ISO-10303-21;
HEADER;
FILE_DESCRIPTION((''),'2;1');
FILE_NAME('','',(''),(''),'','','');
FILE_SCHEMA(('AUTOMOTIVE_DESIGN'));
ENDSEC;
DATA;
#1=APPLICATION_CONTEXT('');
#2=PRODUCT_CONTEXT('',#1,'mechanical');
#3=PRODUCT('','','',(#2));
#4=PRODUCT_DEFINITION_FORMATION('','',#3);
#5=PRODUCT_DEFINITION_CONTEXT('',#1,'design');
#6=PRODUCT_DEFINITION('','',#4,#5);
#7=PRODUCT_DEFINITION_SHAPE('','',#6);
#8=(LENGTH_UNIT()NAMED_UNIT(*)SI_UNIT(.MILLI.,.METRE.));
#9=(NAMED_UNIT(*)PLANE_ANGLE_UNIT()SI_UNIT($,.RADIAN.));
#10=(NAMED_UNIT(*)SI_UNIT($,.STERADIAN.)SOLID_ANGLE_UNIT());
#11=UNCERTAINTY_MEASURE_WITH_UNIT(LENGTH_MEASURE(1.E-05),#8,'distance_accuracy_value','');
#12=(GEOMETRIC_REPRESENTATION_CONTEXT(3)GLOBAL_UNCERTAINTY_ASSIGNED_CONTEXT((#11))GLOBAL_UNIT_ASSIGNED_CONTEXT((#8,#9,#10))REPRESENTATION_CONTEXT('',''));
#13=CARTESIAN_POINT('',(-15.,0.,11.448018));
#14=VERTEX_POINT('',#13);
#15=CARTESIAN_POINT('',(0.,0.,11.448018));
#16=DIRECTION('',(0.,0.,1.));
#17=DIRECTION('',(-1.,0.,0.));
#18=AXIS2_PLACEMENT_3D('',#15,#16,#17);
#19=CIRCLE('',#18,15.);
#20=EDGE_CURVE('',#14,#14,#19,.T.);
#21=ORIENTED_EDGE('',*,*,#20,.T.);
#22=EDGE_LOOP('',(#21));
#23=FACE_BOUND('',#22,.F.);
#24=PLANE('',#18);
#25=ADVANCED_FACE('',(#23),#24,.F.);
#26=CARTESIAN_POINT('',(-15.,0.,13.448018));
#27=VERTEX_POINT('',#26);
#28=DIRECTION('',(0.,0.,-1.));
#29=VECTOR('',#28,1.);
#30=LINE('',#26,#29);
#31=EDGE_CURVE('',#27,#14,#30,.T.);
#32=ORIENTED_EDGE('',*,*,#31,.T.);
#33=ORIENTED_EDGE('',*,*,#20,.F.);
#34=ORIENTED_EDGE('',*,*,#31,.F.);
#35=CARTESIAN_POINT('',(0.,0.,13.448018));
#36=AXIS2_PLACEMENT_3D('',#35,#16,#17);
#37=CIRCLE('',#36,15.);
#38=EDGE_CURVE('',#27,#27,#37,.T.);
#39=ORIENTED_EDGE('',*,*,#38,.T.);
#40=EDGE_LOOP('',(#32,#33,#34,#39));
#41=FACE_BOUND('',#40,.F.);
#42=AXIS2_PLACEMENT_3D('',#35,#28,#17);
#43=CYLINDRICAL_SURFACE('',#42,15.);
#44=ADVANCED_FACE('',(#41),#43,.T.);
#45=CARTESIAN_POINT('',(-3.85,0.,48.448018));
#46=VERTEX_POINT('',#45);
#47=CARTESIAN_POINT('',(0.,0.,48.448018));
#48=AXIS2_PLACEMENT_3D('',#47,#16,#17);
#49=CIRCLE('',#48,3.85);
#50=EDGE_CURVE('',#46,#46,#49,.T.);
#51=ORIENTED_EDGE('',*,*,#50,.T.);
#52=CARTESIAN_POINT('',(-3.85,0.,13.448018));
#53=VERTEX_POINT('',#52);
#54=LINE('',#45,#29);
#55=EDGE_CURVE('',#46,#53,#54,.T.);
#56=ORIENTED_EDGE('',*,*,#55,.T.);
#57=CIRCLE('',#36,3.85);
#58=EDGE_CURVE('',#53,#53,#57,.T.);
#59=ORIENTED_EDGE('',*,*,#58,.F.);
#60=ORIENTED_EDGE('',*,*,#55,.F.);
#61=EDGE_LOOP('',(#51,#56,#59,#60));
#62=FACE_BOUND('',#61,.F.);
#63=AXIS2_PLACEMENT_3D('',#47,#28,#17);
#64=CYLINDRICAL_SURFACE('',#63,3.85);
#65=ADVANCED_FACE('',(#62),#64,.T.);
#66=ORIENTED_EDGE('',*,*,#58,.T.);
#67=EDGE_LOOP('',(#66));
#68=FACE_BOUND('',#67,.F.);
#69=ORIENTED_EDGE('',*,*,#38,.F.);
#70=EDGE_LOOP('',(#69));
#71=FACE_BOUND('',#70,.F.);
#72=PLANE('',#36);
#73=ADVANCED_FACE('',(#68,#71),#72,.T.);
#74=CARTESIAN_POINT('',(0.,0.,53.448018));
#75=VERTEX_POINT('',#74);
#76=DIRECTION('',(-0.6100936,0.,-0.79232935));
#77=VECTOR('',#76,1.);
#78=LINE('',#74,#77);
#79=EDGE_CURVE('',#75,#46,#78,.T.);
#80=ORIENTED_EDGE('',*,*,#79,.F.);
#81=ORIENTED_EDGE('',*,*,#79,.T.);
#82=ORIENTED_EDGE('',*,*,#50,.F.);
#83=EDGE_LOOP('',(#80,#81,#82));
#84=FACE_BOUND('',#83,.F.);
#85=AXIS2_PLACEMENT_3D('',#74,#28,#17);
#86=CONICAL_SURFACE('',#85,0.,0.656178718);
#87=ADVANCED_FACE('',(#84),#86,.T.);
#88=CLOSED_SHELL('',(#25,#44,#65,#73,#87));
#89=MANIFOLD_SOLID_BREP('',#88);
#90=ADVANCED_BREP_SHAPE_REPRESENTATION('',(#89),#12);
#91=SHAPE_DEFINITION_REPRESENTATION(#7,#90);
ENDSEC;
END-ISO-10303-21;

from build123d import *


# Not quite as in the source:
# - a feature names something its author has since deleted; it is built from what else it names


with BuildPart() as f1:
    # F0 (on Front) → F1 (revolve)
    with BuildSketch(Plane.XZ):
        Polygon((0, 53.4480181336), (-3.85, 48.4480181336), (-3.85, 43.4480181336), (-3.85, 33.4480181336), (-3.85, 13.4480181336), (0, 13.4480181336), align=None)
        Polygon((0, 11.4480181336), (0, 13.4480181336), (-3.85, 13.4480181336), (-15, 13.4480181336), (-15, 11.4480181336), align=None)
    revolve(axis=Axis((0, 0, 50.601095613), (0, 0, 1)))


solid = f1.part
